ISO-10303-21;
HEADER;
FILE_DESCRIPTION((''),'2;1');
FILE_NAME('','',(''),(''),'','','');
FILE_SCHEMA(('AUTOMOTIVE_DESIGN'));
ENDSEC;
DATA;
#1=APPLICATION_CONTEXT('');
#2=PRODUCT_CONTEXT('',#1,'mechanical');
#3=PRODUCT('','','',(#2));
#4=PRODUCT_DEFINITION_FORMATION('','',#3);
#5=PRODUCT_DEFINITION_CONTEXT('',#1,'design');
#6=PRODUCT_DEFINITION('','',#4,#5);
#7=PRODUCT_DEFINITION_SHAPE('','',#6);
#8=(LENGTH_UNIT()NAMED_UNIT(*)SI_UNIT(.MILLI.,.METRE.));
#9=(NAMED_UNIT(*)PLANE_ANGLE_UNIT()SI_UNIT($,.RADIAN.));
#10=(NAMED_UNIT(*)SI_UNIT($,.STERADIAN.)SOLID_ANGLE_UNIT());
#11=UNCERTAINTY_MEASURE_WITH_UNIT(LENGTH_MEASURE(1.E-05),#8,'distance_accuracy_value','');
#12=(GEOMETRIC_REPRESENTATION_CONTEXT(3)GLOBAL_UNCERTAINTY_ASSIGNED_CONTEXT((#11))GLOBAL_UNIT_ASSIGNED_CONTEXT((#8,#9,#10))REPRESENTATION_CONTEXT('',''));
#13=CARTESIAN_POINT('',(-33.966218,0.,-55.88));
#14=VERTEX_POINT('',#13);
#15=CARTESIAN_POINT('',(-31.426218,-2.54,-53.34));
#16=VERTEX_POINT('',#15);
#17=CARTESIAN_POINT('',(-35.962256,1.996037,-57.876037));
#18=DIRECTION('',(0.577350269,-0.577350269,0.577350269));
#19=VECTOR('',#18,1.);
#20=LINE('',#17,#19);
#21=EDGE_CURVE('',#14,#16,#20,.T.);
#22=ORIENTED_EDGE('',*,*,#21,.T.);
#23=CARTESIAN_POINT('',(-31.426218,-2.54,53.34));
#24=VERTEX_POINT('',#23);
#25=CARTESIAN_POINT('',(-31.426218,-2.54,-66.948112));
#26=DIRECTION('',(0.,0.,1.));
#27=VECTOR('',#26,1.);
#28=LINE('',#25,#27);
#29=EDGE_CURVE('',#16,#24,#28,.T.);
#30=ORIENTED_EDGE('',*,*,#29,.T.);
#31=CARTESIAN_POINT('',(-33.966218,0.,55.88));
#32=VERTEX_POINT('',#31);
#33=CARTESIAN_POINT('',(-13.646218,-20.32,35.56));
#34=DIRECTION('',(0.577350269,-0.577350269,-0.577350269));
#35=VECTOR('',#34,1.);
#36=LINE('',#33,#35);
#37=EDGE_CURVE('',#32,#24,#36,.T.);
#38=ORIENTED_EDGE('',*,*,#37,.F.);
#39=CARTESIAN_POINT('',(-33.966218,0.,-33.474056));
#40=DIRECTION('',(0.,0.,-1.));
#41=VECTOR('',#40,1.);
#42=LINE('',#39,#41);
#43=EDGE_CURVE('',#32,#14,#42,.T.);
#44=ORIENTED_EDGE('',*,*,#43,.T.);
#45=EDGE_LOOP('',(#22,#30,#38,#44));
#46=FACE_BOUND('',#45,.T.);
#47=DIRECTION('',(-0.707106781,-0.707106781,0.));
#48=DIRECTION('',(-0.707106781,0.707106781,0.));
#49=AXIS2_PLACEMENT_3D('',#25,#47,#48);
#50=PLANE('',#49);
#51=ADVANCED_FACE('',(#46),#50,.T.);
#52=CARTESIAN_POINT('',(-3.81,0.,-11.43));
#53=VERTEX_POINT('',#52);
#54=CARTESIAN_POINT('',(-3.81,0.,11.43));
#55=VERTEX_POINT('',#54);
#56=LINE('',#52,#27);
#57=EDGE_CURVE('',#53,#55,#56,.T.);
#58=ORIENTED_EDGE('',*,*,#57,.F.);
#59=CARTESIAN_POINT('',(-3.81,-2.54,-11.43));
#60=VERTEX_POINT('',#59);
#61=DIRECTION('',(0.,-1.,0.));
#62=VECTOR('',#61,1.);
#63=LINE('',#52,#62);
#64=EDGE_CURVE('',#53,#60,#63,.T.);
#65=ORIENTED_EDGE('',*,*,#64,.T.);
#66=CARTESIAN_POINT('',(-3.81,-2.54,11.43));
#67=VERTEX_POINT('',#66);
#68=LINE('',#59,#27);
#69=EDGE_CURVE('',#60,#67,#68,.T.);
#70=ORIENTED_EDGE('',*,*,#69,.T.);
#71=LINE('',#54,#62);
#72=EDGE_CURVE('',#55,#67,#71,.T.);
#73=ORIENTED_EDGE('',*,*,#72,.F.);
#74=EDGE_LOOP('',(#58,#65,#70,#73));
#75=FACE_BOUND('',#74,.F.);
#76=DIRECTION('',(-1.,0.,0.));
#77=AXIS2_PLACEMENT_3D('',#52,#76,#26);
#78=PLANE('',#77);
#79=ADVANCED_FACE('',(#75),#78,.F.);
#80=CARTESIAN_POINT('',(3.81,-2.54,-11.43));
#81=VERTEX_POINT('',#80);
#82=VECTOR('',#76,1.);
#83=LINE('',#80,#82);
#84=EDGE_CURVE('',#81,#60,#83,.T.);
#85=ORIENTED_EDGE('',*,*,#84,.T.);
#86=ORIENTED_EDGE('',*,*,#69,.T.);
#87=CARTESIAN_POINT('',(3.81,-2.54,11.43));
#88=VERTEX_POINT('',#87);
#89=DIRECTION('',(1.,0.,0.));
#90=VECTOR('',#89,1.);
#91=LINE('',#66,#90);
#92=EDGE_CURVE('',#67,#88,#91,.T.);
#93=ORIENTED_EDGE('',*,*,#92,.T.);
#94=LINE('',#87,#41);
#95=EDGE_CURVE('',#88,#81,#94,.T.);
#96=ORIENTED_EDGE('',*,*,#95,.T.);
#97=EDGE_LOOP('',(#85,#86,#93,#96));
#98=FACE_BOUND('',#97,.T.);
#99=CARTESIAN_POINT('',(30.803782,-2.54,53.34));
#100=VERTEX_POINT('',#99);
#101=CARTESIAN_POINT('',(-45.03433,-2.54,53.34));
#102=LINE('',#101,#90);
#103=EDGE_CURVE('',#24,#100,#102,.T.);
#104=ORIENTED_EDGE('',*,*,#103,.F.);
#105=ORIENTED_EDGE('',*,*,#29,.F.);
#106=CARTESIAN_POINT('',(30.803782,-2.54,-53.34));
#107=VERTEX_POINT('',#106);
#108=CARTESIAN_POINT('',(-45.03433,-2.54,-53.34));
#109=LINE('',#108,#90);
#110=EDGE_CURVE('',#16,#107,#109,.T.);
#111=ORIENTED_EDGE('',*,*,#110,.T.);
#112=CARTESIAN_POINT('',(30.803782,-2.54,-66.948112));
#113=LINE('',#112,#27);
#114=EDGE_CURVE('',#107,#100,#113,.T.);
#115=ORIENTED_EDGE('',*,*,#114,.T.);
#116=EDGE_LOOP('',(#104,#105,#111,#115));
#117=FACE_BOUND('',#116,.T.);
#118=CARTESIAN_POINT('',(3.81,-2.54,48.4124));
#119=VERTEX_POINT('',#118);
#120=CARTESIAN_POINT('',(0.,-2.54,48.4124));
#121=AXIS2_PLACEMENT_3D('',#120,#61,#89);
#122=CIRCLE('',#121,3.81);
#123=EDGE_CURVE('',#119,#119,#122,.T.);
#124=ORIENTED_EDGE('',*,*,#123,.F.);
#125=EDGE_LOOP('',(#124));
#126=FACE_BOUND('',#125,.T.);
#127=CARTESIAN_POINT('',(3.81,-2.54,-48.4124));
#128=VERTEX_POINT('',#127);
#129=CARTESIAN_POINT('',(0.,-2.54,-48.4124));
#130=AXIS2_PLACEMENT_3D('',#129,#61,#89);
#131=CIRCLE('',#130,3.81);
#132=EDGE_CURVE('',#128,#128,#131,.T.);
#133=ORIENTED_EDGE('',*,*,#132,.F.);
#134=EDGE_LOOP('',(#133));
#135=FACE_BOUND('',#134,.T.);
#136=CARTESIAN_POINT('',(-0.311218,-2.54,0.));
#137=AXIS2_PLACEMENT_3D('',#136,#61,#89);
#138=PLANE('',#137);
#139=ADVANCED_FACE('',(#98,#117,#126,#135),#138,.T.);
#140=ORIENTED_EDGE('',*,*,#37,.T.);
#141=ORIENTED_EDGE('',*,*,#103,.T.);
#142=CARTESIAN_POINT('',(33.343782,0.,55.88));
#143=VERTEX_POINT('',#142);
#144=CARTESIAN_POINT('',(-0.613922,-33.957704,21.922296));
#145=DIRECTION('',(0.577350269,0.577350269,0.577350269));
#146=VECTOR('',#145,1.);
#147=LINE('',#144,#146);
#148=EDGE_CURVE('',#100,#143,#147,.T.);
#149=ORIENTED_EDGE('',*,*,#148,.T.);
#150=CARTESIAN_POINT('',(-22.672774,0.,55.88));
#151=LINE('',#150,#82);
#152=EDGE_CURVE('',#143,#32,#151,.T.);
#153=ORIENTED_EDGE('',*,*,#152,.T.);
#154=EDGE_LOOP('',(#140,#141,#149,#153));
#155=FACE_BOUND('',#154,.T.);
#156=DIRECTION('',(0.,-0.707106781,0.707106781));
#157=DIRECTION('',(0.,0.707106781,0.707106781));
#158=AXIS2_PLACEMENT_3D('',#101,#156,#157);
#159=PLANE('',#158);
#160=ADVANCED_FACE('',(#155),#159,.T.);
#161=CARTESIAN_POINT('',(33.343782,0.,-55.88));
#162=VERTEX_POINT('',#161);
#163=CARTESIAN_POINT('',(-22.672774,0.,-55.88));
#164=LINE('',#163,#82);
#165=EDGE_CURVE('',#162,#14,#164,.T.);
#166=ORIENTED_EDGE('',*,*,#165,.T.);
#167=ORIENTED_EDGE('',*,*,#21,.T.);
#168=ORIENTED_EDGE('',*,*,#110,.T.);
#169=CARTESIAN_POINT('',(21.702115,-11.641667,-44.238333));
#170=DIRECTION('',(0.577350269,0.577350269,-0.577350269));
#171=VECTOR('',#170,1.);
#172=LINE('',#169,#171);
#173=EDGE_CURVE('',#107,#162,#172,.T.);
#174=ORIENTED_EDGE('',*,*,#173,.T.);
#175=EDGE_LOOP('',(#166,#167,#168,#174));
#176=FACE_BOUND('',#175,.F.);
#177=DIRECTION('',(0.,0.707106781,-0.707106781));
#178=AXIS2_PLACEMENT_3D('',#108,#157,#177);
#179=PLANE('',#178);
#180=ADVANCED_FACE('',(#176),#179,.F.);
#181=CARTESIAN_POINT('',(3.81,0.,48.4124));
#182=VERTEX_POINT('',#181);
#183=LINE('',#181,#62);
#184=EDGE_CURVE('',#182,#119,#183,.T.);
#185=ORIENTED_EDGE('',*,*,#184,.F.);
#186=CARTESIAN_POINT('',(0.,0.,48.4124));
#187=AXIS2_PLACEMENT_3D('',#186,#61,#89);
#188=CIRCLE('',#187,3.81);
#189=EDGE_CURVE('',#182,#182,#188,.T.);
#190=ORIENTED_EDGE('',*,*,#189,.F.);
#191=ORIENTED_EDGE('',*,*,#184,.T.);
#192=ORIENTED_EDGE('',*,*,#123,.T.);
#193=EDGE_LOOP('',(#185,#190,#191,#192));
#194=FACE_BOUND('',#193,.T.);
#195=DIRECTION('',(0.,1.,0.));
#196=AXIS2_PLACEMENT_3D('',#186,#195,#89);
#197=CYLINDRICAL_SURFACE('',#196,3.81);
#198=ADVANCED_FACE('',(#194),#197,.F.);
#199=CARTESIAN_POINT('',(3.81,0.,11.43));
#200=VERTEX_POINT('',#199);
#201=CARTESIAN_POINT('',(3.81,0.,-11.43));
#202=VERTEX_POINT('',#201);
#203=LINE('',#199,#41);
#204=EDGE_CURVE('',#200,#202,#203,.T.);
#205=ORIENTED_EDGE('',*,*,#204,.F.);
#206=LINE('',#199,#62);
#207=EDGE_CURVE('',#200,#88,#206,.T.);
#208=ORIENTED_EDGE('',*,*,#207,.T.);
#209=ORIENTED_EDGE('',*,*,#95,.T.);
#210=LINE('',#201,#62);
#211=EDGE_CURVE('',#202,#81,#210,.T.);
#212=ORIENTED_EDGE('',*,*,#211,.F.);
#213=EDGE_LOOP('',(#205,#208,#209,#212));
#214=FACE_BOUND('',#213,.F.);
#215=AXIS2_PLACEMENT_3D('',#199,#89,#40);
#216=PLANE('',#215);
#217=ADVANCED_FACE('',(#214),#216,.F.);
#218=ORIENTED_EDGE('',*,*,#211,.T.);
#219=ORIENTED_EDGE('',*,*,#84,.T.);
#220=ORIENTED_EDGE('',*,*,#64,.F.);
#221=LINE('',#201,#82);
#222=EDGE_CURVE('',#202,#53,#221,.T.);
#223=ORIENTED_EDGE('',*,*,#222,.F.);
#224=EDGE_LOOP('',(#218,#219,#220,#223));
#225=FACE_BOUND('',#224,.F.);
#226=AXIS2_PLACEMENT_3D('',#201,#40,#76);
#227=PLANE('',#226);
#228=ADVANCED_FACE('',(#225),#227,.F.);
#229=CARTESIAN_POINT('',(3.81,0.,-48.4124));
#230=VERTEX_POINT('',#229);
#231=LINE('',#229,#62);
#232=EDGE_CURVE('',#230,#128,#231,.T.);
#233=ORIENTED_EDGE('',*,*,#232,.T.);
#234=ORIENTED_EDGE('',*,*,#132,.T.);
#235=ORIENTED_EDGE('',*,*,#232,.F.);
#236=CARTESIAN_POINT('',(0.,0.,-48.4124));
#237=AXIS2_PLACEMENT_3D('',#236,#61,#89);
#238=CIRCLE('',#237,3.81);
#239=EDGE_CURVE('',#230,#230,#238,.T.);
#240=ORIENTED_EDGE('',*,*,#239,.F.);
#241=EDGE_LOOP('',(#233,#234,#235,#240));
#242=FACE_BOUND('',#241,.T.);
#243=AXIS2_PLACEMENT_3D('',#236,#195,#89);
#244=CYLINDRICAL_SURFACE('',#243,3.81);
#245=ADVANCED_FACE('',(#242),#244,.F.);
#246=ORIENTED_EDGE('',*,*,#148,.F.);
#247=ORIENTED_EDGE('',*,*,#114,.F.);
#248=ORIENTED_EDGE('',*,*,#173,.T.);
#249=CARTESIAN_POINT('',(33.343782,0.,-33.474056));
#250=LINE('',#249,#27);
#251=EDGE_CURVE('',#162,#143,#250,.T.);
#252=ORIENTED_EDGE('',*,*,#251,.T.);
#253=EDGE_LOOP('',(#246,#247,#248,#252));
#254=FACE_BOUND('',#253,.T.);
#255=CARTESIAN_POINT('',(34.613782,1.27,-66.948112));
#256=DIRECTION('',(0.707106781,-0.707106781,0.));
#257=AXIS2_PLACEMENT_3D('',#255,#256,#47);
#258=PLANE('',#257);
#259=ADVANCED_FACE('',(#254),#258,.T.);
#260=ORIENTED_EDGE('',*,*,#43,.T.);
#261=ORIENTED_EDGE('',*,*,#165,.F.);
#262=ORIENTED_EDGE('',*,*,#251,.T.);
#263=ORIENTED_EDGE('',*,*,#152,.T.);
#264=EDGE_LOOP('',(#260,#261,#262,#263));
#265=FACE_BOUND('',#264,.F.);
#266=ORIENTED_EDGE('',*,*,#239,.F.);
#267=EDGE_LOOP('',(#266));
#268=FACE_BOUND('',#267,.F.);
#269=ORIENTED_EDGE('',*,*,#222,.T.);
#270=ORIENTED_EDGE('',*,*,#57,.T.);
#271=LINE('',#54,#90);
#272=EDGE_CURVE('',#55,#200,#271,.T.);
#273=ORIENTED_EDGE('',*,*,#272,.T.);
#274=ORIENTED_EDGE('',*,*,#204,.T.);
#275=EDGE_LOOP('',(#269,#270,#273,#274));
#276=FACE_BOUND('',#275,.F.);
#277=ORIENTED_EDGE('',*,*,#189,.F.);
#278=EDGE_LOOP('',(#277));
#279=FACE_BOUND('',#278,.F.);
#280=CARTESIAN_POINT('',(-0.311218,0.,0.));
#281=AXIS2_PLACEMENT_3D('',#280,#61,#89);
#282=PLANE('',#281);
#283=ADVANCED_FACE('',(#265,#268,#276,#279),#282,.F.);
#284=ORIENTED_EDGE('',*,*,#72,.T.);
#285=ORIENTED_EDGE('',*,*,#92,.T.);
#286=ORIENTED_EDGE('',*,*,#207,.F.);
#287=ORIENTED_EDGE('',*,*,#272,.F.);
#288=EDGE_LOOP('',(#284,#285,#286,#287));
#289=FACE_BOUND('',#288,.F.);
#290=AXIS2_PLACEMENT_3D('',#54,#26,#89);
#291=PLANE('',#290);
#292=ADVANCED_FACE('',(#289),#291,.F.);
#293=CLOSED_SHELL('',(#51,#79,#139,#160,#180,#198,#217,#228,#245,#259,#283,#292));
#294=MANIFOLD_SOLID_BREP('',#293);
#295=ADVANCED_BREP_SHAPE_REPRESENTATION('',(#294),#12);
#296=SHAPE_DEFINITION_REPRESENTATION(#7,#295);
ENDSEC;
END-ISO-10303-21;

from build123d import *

# Parameters (mm, degrees)
F0_W        = 69.85
F0_H        = 114.3
F0_R        = 3.81
F1_DEPTH    = 2.54
F2_T1_DEPTH = 89.4462243683
F2_T3_DEPTH = 133.8962243683


# Not quite as in the source:
# - a fillet or chamfer that OpenCascade refuses, or shapes differently, is made with other operations: its cross-section is extruded or revolved along the edge and cut away or added


with BuildPart() as f1:
    # F0 (on Front) → F1 (new body)
    with BuildSketch(Plane.XZ):
        with Locations((-0.3112182021, 0)):
            Rectangle(F0_W, F0_H)
        with Locations((0, -48.4124)):
            Circle(F0_R, mode=Mode.SUBTRACT)
        Polygon((-3.81, 11.43), (0, 11.43), (3.81, 11.43), (3.81, -11.43), (-3.81, -11.43), align=None, mode=Mode.SUBTRACT)
        with Locations((0, 48.4124)):
            Circle(F0_R, mode=Mode.SUBTRACT)
    extrude(amount=F1_DEPTH)

    # F2: chamfer of 3.81 on 4 edges, made by hand

    # F2_s2 → F2_t1 (cut)
    with BuildSketch(Plane.YZ.offset(-45.0343303863)):
        Polygon((-2.54, 53.34), (1.27, 57.15), (-2.54, 57.15), align=None)
        Polygon((-2.54, -53.34), (1.27, -57.15), (-2.54, -57.15), align=None)
    extrude(amount=F2_T1_DEPTH, mode=Mode.SUBTRACT)

    # F2_s4 → F2_t3 (cut)
    with BuildSketch(Plane.XY.offset(-66.9481121842)):
        Polygon((-31.4262182021, -2.54), (-35.2362182021, 1.27), (-35.2362182021, -2.54), align=None)
        Polygon((34.6137817979, 1.27), (30.8037817979, -2.54), (34.6137817979, -2.54), align=None)
    extrude(amount=F2_T3_DEPTH, mode=Mode.SUBTRACT)


solid = f1.part
